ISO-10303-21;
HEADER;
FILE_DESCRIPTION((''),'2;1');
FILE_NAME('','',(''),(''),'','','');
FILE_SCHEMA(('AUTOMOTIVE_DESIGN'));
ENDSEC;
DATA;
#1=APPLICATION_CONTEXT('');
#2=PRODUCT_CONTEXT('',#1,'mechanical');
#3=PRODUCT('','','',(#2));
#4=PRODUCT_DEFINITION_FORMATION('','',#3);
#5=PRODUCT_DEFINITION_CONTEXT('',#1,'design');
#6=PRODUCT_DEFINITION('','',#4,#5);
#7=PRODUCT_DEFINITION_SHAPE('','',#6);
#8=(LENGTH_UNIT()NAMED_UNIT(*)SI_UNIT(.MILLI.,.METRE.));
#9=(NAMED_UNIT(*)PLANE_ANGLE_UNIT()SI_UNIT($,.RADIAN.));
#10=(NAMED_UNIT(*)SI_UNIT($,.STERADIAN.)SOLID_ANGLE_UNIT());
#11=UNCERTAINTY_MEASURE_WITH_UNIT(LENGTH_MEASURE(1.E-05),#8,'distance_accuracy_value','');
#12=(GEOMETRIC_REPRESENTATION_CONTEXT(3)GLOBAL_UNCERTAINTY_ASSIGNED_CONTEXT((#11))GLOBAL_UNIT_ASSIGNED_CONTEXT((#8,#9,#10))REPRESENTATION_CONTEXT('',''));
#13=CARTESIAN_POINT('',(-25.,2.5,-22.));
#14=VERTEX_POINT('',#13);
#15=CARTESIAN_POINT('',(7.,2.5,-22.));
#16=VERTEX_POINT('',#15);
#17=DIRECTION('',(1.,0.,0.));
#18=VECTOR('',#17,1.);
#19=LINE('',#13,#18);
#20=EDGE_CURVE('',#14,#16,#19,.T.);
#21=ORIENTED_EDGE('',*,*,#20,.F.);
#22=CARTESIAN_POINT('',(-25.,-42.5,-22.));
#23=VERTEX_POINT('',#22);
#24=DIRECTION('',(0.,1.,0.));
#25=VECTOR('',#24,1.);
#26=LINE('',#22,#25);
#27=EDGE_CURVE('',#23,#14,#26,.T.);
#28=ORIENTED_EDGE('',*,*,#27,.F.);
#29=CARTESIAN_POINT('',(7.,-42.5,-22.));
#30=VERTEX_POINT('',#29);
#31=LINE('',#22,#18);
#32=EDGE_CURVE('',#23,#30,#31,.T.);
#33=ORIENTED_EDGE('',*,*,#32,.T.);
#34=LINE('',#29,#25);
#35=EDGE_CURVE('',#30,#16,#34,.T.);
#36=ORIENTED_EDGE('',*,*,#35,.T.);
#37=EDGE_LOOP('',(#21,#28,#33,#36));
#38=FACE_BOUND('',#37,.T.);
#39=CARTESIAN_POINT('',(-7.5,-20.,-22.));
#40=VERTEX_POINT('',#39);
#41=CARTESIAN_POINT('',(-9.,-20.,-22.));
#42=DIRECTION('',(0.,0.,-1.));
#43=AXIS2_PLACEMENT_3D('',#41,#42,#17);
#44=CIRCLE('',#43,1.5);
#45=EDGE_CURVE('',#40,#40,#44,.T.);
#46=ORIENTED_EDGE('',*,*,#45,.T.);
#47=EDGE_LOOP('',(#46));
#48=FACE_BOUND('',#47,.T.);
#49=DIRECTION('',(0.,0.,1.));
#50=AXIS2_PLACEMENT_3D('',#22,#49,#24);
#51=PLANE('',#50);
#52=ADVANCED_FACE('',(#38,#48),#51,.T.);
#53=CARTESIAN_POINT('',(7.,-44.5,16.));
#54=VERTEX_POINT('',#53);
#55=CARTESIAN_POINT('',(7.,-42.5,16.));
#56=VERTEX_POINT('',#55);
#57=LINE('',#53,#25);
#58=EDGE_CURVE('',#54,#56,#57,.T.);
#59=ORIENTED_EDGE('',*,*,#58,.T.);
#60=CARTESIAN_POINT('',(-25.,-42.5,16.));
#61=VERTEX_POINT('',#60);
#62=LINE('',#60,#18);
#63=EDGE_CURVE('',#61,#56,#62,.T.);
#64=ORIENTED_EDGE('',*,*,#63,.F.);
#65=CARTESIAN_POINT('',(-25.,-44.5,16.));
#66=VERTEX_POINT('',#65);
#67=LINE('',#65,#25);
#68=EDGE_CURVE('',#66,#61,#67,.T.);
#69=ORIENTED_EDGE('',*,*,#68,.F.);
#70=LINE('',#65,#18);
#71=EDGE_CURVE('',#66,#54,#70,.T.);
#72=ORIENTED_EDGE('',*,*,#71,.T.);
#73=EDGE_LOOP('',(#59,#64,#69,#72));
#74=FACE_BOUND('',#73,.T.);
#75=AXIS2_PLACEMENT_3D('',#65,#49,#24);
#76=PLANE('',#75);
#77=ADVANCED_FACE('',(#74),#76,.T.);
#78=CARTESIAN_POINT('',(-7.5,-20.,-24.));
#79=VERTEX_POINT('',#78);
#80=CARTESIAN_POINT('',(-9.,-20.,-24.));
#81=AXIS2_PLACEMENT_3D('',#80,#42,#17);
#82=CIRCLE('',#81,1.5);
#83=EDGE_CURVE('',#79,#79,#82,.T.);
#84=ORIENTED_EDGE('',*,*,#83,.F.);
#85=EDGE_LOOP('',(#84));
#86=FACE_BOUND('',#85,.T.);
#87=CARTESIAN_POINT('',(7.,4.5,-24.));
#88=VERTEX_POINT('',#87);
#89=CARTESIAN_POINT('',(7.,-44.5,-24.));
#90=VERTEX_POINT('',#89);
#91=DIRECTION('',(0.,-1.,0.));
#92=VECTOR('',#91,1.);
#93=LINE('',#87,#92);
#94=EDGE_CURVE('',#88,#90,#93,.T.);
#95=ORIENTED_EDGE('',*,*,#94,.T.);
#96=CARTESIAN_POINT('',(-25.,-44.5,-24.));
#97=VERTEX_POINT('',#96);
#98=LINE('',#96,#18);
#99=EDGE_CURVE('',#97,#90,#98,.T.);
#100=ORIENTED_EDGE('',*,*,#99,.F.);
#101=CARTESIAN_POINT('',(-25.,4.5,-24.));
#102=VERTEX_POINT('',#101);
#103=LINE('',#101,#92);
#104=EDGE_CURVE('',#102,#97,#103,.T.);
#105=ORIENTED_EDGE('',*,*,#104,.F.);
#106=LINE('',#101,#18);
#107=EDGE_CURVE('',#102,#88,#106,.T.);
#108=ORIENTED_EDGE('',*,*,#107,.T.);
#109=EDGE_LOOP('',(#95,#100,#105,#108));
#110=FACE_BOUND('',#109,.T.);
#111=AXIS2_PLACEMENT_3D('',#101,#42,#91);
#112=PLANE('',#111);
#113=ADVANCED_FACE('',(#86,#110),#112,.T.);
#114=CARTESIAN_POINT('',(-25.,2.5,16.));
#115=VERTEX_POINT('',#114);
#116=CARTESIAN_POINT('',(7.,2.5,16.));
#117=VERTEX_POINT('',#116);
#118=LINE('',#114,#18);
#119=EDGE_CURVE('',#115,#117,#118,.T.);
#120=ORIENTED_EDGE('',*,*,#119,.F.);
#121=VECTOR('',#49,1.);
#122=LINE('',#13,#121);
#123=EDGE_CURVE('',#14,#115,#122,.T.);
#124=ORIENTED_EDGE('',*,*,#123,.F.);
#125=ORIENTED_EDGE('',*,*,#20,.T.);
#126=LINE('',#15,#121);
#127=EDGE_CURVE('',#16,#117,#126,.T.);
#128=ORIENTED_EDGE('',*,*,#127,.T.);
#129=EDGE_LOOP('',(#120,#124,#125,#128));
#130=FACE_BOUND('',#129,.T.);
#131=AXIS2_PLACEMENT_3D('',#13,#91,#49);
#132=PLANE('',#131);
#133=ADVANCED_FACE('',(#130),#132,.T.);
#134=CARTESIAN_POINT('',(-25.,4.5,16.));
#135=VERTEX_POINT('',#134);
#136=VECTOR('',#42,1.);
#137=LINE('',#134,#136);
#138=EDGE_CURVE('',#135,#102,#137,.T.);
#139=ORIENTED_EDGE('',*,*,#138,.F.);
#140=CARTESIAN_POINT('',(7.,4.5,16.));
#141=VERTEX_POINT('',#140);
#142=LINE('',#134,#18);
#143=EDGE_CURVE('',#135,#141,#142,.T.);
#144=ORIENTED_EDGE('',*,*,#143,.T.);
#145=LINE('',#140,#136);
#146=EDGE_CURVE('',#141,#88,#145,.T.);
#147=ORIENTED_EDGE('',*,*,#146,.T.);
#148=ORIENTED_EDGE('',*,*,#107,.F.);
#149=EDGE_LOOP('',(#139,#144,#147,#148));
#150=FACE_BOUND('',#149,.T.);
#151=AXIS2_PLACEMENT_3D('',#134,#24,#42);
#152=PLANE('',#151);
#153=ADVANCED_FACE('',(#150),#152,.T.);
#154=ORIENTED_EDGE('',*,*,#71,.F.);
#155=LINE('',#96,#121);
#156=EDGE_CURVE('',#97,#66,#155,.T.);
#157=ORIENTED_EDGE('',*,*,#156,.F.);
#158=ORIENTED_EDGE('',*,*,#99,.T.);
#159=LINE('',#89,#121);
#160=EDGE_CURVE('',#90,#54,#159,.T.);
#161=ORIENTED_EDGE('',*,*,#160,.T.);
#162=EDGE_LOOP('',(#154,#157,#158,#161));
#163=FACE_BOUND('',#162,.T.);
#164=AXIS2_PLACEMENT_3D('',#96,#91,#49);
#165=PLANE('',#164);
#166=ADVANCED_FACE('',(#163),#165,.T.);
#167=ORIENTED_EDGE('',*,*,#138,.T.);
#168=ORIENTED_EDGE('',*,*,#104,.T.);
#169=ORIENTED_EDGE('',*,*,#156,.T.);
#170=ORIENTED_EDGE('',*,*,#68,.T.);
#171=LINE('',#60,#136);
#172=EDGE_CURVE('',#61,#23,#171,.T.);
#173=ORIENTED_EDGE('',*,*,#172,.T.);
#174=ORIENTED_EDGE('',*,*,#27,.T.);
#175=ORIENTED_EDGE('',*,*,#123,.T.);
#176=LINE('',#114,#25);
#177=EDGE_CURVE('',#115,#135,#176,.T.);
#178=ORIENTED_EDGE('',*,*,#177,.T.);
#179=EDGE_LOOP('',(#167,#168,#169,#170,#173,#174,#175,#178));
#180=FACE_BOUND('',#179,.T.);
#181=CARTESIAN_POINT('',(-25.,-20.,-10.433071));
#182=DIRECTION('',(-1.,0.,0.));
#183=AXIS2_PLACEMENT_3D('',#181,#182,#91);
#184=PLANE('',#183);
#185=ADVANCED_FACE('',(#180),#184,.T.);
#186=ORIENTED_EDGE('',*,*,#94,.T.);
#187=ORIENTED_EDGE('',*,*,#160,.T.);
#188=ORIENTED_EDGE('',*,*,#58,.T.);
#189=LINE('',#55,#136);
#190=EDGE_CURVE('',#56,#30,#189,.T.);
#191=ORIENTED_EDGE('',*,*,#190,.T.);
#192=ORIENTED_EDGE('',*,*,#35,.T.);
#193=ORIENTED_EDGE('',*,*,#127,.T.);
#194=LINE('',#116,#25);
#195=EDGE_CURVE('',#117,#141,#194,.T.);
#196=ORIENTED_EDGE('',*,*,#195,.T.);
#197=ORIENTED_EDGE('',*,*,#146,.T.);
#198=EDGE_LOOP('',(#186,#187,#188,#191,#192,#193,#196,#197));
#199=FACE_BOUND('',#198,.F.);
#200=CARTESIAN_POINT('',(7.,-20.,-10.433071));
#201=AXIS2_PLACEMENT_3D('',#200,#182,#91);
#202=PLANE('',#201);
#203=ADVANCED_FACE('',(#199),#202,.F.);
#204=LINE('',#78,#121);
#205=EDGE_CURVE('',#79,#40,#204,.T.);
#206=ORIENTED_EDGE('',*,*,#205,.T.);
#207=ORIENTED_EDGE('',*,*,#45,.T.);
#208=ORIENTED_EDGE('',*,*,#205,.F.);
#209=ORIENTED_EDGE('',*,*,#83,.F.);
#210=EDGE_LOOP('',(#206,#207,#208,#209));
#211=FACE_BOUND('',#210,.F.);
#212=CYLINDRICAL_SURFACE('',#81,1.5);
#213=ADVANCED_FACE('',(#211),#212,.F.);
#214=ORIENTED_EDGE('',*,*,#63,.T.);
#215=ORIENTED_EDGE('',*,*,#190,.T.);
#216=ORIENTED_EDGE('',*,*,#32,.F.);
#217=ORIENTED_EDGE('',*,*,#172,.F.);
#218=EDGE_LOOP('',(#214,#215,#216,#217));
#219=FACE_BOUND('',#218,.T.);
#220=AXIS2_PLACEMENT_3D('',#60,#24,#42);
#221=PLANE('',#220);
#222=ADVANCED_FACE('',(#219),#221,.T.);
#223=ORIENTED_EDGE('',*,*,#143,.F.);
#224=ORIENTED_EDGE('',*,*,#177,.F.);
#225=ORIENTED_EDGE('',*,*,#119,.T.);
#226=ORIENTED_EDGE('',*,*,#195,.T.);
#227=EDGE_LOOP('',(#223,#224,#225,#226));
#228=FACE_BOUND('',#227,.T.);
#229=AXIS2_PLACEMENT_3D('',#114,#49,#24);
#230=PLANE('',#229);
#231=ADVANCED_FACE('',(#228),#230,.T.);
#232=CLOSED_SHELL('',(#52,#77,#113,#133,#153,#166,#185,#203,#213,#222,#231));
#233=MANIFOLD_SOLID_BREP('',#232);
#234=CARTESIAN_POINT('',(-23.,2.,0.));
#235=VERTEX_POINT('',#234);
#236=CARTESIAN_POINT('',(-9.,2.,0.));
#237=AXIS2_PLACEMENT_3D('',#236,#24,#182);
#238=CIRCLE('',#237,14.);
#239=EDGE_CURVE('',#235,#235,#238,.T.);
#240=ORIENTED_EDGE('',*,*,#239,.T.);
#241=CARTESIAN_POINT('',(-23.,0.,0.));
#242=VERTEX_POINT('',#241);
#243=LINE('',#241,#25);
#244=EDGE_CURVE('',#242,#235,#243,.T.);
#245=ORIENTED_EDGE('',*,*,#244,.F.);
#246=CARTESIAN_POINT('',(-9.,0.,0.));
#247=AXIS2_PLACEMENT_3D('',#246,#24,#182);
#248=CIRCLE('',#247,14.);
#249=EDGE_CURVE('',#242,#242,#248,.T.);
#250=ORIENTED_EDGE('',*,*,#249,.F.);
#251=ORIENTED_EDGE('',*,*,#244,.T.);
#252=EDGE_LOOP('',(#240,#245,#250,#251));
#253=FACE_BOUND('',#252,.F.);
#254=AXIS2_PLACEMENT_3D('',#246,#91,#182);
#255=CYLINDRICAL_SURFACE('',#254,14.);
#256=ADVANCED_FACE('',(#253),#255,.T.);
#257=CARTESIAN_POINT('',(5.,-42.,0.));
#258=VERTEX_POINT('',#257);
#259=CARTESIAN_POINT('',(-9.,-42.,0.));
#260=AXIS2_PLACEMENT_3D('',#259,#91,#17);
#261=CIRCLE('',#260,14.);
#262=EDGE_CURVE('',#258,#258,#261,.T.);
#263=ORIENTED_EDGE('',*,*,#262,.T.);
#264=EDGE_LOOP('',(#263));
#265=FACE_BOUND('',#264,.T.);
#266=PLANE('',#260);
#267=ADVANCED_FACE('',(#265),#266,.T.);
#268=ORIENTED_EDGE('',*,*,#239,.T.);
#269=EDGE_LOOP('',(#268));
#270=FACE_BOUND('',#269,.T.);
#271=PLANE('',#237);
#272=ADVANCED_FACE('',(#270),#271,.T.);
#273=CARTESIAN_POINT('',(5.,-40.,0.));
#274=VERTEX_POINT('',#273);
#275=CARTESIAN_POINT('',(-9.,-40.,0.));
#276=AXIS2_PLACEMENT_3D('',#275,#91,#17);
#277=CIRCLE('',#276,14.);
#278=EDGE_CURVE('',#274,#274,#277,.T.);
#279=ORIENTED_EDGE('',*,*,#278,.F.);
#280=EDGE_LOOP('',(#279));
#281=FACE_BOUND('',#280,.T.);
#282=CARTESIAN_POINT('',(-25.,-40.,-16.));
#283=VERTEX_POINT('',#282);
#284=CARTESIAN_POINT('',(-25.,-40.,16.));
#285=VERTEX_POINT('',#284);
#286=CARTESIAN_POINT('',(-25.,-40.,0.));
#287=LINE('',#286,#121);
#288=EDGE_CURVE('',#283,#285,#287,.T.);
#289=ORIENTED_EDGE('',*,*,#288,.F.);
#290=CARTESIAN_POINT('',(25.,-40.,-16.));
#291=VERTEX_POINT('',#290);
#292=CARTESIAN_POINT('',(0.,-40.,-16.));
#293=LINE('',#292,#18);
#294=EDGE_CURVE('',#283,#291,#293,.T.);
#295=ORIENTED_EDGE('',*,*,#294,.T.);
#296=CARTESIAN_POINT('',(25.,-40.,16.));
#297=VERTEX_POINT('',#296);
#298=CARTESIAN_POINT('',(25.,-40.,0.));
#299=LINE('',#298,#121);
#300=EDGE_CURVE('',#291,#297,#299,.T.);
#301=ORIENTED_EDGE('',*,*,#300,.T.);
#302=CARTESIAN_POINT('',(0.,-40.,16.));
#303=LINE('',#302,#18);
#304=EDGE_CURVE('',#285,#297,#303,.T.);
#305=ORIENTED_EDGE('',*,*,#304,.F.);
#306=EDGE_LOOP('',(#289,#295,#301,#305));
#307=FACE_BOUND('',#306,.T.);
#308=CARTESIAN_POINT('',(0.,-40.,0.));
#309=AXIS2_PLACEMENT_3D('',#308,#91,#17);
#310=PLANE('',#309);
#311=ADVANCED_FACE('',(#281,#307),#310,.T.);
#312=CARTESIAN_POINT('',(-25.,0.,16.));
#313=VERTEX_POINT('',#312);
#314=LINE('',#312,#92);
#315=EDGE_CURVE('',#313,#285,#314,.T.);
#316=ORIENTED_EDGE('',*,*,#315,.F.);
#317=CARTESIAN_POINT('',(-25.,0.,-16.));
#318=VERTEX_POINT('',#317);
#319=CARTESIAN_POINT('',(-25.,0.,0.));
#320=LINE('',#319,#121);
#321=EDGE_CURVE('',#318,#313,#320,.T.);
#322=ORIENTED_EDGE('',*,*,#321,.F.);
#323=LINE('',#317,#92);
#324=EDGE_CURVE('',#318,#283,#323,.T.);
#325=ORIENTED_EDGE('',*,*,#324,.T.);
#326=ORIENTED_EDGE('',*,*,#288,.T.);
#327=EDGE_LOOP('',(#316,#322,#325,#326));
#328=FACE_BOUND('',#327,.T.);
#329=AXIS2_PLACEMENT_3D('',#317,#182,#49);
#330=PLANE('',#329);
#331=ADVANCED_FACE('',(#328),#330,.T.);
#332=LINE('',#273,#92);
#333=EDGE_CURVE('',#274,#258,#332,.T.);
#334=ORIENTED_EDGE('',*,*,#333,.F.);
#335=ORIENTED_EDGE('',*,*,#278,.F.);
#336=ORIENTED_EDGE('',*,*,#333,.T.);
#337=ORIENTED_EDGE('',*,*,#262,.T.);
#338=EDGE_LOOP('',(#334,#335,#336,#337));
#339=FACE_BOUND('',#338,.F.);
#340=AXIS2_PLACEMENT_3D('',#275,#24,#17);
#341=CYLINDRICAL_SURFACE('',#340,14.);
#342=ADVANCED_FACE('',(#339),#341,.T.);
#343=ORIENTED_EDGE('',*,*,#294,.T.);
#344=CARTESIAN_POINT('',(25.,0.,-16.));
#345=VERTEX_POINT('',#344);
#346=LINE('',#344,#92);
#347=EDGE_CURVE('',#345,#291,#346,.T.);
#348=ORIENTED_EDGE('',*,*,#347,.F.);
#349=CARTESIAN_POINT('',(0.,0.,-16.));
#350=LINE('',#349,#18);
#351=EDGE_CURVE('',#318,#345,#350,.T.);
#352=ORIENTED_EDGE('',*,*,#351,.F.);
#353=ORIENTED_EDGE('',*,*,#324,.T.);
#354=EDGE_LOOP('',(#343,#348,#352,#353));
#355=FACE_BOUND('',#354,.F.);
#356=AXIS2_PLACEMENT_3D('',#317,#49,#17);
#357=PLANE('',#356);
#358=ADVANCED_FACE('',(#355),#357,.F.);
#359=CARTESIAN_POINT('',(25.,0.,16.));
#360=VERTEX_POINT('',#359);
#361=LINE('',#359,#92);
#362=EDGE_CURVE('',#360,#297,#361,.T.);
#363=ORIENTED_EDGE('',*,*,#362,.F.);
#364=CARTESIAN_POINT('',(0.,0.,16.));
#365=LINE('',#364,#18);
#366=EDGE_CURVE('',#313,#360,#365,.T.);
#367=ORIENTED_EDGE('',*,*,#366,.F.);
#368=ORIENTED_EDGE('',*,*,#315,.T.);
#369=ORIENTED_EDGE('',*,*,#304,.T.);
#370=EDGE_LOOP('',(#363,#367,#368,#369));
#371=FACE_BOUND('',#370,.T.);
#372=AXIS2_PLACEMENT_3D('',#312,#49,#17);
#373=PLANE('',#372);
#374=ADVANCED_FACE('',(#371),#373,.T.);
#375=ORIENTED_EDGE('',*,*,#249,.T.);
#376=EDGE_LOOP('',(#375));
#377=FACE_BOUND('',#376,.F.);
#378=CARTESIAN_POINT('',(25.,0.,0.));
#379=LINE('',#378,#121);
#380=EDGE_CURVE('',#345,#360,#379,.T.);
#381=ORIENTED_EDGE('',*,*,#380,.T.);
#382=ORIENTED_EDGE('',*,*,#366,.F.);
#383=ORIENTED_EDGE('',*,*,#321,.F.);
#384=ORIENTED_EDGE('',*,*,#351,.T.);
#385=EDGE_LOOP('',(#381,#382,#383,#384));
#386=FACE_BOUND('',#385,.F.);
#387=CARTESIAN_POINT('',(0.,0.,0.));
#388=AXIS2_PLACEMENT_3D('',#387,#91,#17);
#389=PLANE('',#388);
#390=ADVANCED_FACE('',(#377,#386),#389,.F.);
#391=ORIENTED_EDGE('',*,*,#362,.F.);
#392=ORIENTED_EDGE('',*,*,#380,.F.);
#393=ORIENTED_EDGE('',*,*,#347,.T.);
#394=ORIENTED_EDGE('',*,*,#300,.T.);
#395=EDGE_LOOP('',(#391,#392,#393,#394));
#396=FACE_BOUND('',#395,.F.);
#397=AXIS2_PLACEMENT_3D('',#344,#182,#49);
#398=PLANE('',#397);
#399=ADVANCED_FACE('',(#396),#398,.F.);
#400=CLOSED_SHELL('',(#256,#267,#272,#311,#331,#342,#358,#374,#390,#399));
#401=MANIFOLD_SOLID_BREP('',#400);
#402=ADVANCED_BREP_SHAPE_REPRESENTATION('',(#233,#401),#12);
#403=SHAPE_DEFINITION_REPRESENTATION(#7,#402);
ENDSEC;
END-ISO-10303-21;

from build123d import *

# Parameters (mm, degrees)
F0_W     = 50
F0_H     = 32
F1_DEPTH = 40
F2_R     = 14
F3_DEPTH = 2
F4_R     = 14
F5_DEPTH = 2
F7_DEPTH = 32
F8_R     = 1.5
F9_DEPTH = 25


with BuildPart() as f1:
    # F0 (on Front) → F1 (new body)
    with BuildSketch(Plane.XZ):
        Rectangle(F0_W, F0_H)
    extrude(amount=F1_DEPTH)

    # F2 (on face) → F3 (join)
    with BuildSketch(Plane.XZ.offset(40)):
        with Locations((-9, 0)):
            Circle(F2_R)
    extrude(amount=F3_DEPTH)

    # F4 (on face) → F5 (join)
    with BuildSketch(Plane(origin=(0, 0, 0), x_dir=(-1, 0, 0), z_dir=(0, 1, 0))):
        with Locations((9, 0)):
            Circle(F4_R)
    extrude(amount=F5_DEPTH)


with BuildPart() as f7:
    # F6 (on face) → F7 (new body)
    with BuildSketch(Plane(origin=(-25, 0, 0), x_dir=(0, -1, 0), z_dir=(-1, 0, 0))):
        Polygon((-2.5, -22), (-2.5, 16), (-4.5, 16), (-4.5, -24), (44.5, -24), (44.5, 16), (42.5, 16), (42.5, -22), align=None)
    extrude(amount=-F7_DEPTH)

    # F8 (on face) → F9 (cut)
    with BuildSketch(Plane(origin=(0, 0, -24), x_dir=(1, 0, 0), z_dir=(0, 0, -1))):
        with Locations((-9, 20)):
            Circle(F8_R)
    extrude(amount=-F9_DEPTH, mode=Mode.SUBTRACT)


solid = Compound([f1.part, f7.part])
